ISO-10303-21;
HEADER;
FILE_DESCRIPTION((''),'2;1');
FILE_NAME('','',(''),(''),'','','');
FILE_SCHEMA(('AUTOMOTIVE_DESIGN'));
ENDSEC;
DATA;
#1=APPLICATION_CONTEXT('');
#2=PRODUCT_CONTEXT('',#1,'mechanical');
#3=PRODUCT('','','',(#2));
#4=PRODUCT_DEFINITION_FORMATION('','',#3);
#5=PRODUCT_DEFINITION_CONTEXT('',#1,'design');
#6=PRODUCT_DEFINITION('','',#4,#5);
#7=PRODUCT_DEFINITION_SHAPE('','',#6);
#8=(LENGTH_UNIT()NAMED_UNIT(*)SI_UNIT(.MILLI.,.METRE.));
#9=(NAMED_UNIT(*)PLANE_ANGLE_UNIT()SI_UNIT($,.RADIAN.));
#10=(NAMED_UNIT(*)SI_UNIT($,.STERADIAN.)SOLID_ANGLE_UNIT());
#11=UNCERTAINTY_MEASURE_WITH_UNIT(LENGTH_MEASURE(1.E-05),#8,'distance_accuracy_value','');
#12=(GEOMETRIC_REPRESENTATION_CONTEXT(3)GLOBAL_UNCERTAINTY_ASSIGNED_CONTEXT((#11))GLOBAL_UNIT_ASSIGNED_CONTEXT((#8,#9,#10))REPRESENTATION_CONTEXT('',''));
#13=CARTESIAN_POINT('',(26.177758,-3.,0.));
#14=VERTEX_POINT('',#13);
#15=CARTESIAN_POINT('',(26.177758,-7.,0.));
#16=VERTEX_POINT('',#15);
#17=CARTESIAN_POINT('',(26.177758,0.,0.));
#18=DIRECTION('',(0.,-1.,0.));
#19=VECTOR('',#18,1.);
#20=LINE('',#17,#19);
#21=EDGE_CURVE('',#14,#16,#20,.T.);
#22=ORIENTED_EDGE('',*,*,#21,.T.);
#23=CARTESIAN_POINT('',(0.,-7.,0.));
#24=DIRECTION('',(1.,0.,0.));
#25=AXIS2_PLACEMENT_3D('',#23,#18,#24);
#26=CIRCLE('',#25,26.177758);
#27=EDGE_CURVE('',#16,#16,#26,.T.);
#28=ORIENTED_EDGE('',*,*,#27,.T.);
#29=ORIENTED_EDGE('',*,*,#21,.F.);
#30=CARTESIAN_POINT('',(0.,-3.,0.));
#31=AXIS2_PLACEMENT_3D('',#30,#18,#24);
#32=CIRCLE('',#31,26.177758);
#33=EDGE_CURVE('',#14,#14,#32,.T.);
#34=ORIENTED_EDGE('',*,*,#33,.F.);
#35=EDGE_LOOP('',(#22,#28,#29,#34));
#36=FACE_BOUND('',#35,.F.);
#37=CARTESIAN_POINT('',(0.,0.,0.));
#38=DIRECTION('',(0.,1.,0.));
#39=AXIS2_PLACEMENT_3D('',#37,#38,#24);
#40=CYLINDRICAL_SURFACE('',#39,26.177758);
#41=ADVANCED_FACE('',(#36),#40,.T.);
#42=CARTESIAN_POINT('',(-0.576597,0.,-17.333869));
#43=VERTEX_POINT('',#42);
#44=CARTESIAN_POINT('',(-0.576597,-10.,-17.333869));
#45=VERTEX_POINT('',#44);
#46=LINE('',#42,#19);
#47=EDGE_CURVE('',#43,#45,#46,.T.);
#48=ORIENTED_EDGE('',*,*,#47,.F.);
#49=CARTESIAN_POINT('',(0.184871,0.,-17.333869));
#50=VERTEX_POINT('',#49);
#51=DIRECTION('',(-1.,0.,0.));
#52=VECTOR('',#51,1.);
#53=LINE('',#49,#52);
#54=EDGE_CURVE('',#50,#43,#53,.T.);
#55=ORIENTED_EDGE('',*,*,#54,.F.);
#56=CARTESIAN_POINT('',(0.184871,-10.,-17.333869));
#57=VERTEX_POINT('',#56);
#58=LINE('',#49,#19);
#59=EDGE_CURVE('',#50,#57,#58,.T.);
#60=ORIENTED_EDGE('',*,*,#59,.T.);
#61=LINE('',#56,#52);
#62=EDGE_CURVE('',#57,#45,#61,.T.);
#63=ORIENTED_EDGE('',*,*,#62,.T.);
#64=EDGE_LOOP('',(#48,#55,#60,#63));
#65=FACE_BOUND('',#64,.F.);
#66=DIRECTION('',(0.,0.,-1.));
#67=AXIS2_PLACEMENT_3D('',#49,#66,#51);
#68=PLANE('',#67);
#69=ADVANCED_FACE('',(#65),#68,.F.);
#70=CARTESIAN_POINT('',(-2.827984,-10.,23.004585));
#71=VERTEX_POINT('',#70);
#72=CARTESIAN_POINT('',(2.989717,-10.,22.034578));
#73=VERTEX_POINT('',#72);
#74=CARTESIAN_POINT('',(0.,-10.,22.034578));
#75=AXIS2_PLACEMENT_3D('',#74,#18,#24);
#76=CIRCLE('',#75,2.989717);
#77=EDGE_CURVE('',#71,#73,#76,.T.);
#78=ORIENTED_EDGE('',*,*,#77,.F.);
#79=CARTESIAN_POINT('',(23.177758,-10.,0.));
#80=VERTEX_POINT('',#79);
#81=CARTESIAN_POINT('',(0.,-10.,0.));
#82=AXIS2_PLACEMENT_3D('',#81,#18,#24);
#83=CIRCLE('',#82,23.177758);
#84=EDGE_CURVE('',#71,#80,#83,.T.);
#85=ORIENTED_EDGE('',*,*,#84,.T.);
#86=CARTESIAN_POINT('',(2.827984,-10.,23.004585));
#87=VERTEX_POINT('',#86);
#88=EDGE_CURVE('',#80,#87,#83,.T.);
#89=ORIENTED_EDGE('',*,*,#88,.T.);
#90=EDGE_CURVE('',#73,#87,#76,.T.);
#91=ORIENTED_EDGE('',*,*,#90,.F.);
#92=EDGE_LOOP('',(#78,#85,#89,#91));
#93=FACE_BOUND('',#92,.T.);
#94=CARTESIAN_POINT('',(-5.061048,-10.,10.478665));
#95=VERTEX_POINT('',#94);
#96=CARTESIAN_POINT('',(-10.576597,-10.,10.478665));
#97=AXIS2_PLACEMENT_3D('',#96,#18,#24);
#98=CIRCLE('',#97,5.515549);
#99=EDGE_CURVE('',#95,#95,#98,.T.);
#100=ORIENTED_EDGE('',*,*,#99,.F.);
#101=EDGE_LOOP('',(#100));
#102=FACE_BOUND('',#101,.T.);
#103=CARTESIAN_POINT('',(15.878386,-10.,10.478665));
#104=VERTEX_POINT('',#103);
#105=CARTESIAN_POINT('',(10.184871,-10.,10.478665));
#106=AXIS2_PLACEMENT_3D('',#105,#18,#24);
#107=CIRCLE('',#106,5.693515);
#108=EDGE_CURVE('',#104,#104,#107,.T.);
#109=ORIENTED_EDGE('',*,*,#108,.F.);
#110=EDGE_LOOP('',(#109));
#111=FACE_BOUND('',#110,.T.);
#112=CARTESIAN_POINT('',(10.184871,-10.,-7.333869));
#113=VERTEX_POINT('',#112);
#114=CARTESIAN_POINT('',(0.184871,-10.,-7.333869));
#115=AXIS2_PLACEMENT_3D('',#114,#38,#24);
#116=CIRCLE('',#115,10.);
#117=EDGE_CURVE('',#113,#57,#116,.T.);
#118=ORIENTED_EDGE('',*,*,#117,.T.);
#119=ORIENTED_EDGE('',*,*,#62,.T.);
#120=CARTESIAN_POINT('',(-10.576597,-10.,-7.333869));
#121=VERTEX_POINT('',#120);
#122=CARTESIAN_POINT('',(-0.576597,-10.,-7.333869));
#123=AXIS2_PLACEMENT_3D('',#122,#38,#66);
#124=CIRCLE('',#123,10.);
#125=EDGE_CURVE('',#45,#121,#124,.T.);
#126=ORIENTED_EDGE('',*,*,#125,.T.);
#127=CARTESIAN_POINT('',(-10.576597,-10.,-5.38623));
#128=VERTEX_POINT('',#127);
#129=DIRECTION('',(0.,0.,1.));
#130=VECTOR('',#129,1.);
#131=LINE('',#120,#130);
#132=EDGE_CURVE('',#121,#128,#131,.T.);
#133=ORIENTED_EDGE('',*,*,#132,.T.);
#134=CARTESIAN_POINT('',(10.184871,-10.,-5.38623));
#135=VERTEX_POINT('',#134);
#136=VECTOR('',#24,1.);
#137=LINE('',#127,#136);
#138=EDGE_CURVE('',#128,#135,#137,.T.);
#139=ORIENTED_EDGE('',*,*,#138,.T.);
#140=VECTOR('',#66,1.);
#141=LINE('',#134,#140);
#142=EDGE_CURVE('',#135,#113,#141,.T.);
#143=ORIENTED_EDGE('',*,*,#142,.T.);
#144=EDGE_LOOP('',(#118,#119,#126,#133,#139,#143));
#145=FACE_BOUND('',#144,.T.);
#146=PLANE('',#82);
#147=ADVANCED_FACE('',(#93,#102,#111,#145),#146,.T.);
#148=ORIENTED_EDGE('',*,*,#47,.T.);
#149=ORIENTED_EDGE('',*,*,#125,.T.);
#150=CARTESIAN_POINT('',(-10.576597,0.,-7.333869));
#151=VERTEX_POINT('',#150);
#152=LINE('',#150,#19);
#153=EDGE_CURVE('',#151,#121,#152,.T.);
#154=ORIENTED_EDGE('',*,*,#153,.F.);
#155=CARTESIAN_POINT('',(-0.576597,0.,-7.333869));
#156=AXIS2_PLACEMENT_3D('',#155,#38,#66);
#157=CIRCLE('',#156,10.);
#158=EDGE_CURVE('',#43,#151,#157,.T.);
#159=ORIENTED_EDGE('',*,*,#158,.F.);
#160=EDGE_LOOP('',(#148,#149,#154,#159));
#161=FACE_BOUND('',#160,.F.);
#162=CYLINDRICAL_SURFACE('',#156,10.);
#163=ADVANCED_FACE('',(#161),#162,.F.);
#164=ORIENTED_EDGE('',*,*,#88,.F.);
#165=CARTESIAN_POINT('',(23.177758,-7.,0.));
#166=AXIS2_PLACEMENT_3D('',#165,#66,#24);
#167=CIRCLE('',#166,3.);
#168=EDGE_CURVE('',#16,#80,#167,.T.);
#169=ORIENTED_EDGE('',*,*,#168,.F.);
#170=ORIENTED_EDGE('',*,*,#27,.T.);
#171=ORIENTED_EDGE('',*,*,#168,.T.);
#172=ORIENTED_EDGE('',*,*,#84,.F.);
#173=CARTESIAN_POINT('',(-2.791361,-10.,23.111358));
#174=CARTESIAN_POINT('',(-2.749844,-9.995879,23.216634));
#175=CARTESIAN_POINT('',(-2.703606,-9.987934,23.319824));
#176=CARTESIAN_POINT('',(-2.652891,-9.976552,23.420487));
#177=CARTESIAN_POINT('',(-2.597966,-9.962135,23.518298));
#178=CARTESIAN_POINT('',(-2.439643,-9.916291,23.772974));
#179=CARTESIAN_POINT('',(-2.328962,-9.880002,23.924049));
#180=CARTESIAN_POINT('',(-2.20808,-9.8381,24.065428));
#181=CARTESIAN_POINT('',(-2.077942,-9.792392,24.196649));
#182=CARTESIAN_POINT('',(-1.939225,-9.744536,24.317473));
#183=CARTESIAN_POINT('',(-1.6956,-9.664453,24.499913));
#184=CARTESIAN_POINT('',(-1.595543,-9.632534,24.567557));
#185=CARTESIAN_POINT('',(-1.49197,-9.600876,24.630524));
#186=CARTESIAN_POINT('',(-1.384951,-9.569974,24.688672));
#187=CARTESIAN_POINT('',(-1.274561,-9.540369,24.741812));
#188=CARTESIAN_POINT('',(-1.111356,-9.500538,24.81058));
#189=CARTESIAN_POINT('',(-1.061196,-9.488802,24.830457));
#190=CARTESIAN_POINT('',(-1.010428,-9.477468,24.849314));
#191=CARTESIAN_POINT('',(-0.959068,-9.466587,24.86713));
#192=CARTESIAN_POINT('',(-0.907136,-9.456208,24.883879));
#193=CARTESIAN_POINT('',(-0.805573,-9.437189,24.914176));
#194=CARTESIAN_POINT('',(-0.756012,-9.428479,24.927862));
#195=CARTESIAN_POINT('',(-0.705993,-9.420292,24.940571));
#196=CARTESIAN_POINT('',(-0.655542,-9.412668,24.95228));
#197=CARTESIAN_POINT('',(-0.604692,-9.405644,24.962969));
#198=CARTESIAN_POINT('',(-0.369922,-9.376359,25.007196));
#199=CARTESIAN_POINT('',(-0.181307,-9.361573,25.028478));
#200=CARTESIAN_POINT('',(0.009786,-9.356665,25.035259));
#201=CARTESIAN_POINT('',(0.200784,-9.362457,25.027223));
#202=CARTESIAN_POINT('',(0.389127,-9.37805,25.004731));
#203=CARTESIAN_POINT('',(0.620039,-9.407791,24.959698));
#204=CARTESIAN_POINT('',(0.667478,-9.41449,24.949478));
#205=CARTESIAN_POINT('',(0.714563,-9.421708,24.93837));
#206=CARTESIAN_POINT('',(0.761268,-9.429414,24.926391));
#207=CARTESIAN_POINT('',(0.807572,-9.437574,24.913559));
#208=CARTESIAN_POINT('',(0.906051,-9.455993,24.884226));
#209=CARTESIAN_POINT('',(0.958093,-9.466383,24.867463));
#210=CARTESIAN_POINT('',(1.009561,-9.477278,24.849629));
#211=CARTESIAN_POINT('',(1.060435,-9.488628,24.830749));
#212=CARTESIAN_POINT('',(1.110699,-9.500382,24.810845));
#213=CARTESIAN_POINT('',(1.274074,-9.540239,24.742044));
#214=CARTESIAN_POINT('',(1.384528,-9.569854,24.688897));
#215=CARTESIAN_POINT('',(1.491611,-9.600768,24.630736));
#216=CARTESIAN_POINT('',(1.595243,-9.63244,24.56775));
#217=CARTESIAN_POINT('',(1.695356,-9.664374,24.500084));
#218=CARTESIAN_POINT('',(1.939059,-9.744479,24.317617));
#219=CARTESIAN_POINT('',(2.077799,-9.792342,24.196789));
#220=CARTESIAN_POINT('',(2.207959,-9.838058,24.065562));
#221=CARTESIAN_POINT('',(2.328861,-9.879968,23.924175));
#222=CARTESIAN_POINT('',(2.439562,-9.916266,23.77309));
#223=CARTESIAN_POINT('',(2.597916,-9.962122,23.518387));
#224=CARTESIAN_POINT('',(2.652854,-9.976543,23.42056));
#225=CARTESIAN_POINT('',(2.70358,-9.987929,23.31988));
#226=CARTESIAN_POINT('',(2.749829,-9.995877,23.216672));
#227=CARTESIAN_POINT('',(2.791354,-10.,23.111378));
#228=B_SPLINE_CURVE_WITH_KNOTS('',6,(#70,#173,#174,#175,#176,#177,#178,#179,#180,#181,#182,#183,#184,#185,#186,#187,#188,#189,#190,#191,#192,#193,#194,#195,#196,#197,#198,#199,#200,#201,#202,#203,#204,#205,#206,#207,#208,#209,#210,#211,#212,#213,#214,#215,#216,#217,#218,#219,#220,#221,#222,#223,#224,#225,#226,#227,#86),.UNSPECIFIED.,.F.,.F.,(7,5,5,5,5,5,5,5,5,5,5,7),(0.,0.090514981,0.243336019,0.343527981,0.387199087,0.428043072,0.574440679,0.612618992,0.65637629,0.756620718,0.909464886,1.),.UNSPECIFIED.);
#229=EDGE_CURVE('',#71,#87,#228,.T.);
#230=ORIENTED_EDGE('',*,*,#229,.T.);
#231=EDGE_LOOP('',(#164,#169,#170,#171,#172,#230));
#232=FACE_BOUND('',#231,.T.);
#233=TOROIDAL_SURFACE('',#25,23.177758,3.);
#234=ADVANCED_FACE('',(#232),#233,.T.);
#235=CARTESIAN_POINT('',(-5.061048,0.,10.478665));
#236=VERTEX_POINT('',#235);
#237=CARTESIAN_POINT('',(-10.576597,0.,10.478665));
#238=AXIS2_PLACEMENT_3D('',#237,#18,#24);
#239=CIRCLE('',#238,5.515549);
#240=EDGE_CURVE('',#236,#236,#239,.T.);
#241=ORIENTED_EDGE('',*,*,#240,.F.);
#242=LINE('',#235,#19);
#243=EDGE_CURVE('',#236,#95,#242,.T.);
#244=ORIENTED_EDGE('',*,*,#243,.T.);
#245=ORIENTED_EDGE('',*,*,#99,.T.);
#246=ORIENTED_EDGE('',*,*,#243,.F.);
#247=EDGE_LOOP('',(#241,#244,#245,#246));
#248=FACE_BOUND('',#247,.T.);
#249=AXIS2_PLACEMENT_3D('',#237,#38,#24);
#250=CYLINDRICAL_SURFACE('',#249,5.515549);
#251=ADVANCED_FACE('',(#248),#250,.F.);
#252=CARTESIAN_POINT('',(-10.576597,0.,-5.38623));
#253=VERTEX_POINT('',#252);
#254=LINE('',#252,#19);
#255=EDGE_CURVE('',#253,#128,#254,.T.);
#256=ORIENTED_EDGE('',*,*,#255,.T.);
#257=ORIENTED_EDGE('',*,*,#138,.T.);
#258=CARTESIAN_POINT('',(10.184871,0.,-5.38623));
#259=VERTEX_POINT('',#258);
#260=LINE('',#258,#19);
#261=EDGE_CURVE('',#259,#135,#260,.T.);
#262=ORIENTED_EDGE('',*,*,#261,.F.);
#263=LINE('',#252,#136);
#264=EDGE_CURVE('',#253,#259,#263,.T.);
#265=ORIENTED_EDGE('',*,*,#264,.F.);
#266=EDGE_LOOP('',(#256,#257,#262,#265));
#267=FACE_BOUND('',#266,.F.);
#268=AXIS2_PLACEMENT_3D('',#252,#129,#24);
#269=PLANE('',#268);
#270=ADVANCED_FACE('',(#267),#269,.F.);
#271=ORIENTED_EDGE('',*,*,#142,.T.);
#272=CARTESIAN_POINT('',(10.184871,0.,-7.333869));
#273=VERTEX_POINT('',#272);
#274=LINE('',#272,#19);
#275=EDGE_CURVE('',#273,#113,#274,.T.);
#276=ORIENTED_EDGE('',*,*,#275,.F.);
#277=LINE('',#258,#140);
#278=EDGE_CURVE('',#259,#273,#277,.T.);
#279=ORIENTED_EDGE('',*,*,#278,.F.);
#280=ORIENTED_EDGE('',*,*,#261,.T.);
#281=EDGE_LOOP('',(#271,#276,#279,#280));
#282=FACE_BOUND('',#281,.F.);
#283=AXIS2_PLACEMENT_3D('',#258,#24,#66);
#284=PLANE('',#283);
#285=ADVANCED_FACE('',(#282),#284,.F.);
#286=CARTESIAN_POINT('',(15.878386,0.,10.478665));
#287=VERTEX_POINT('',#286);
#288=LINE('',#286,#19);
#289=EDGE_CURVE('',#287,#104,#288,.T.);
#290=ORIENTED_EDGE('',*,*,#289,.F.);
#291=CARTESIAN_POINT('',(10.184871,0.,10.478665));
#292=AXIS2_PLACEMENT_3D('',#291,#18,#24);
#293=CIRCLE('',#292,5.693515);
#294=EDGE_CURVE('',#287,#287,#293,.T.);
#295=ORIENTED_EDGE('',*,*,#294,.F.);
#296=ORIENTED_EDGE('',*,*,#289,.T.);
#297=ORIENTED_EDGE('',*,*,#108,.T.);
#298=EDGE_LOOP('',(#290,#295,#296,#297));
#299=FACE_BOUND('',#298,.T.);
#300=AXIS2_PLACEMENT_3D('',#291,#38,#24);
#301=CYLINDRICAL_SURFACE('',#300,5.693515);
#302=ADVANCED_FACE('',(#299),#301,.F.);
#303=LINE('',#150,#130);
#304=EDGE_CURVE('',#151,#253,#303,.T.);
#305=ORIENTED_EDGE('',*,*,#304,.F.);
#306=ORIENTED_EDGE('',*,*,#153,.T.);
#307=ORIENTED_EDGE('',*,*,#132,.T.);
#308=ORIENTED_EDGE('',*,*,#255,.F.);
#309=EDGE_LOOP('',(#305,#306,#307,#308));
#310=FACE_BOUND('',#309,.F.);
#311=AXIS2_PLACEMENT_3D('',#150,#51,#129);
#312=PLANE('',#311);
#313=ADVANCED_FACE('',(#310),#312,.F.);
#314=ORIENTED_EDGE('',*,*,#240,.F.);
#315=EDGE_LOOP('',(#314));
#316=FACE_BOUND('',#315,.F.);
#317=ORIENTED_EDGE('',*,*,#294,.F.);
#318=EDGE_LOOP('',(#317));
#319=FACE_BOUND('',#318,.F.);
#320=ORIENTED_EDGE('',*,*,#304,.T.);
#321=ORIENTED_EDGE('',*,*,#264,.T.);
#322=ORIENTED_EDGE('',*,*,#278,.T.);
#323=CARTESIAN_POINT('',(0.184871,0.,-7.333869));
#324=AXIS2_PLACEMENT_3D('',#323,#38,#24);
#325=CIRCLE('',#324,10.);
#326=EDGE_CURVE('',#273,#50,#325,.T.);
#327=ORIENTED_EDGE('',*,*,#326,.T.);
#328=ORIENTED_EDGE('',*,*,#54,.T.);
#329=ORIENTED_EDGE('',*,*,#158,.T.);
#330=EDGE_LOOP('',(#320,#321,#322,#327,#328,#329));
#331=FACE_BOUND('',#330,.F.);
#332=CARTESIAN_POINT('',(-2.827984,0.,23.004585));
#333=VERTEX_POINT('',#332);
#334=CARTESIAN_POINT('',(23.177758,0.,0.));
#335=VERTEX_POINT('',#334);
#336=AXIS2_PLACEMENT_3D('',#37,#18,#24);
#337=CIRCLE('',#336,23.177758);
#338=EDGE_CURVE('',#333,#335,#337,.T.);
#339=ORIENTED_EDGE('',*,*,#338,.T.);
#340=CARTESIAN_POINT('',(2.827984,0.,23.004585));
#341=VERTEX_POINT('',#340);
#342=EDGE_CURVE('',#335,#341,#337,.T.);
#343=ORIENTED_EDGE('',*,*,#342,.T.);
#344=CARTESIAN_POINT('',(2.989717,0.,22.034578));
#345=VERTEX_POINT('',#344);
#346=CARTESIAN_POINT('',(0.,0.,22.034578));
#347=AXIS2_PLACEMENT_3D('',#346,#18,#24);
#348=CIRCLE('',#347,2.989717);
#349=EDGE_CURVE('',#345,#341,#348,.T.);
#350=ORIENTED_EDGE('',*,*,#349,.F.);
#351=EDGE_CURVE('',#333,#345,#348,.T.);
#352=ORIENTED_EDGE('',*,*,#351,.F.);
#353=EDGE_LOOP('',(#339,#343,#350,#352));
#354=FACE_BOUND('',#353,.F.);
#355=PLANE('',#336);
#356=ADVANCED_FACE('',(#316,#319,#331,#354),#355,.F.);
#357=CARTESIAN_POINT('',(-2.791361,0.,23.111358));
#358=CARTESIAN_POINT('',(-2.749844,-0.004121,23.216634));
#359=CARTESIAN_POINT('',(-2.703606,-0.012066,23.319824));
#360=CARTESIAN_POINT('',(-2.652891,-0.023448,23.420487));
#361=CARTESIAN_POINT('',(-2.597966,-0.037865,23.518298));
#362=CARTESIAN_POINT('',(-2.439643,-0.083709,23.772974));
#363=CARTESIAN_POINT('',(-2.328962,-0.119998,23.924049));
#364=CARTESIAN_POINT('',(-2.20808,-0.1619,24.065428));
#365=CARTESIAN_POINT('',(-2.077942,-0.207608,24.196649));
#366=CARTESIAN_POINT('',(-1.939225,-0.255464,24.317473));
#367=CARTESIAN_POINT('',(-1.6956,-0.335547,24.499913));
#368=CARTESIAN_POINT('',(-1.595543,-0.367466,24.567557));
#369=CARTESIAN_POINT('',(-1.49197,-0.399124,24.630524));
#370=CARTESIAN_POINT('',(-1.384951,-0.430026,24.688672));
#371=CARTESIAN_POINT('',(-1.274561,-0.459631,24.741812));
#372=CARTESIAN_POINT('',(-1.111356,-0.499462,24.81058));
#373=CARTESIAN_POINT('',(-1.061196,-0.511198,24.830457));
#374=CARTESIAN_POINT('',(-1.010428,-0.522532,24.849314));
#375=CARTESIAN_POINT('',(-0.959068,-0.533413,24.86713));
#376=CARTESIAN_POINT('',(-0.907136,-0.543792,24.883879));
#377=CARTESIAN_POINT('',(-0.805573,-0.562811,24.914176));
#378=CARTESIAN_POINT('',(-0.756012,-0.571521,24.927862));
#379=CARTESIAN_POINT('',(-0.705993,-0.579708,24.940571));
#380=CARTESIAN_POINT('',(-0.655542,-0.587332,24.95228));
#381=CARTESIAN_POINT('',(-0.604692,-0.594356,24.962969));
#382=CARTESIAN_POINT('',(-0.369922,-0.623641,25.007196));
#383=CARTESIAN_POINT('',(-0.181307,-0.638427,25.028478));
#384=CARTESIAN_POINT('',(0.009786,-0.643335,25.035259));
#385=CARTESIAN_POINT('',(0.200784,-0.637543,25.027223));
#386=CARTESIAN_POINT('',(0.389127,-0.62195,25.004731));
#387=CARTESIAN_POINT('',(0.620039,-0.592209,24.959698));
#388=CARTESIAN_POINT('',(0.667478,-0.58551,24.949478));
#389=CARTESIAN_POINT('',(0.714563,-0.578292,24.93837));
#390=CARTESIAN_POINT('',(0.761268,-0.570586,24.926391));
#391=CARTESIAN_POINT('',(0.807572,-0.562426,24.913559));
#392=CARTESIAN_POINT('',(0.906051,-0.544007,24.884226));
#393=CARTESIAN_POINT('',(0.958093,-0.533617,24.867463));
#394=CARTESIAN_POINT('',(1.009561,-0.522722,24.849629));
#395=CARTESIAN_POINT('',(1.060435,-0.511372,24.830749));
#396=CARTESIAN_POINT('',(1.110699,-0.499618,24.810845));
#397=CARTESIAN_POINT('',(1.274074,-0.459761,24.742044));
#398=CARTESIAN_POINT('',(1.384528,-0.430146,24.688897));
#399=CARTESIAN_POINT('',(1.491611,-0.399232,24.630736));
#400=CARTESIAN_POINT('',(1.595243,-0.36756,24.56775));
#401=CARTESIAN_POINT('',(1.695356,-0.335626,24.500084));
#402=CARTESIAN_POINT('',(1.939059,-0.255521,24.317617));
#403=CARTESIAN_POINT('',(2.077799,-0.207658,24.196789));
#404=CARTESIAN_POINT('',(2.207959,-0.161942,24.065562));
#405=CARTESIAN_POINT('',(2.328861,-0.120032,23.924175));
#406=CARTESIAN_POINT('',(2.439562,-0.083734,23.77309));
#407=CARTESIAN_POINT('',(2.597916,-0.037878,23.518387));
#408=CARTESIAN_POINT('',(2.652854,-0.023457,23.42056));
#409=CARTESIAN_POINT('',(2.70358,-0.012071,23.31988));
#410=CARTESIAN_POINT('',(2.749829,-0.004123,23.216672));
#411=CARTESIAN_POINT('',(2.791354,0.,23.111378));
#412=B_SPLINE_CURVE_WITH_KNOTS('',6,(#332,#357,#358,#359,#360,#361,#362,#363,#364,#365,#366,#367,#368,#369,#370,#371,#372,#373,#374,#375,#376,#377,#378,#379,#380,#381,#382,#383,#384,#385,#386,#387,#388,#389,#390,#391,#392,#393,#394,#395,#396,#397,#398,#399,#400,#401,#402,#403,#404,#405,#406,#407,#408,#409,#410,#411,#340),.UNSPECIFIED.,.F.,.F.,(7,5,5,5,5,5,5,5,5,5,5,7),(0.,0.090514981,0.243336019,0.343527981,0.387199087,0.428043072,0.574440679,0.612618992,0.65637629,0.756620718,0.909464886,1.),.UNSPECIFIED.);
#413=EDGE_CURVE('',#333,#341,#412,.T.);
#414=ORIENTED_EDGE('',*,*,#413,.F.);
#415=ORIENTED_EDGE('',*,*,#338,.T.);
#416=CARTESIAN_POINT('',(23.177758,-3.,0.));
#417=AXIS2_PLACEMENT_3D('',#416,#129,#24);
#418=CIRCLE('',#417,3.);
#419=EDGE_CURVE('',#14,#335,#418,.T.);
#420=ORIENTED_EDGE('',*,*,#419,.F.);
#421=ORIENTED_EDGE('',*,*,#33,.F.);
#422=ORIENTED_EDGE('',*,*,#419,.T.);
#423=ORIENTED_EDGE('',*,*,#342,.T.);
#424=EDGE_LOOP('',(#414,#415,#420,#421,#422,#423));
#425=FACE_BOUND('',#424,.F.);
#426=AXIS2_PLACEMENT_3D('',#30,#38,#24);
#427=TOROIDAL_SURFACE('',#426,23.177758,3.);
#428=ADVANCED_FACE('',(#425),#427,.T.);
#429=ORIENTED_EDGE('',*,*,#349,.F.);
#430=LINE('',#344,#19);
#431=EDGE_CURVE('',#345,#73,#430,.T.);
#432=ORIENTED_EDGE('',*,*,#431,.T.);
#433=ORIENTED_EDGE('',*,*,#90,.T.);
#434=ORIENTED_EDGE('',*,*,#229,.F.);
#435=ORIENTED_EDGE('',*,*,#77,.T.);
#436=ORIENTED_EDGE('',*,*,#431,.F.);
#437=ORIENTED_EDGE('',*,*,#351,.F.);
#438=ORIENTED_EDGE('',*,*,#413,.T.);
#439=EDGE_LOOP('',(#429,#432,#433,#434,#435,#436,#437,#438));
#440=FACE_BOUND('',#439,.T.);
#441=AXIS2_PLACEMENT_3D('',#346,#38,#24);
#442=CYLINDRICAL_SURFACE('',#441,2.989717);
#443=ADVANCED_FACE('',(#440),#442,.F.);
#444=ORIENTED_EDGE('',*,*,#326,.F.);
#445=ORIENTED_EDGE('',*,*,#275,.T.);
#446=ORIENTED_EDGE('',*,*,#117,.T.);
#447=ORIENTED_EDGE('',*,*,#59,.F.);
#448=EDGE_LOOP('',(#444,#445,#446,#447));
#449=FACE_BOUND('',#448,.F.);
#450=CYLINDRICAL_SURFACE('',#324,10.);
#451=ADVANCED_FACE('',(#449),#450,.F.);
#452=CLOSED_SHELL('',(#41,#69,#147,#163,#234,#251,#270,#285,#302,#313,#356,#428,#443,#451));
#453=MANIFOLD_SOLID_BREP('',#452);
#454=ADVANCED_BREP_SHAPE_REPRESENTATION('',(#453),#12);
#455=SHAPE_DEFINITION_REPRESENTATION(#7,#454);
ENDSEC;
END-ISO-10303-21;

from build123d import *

# Parameters (mm, degrees)
F0_R     = 26.177757608
F0_R_2   = 5.5155489558
F0_R_3   = 2.9897173108
F0_R_4   = 5.6935154322
F1_DEPTH = 10


# Not quite as in the source:
# - a fillet or chamfer that OpenCascade refuses, or shapes differently, is made with other operations: its cross-section is extruded or revolved along the edge and cut away or added


with BuildPart() as f1:
    # F0 (on Front) → F1 (new body)
    with BuildSketch(Plane.XZ):
        Circle(F0_R)
        with BuildLine():
            Line((-10.5765974149, -7.333868891), (-10.5765974149, -5.3862300701))
            Line((-10.5765974149, -5.3862300701), (10.1848710328, -5.3862300701))
            Line((10.1848710328, -5.3862300701), (10.1848710328, -7.333868891))
            ThreePointArc((10.1848710328, -7.333868891), (7.2559388447, -14.4049367029), (0.1848710328, -17.333868891))
            Line((0.1848710328, -17.333868891), (-0.5765974149, -17.333868891))
            ThreePointArc((-0.5765974149, -17.333868891), (-7.6476652268, -14.4049367029), (-10.5765974149, -7.333868891))
        make_face(mode=Mode.SUBTRACT)
        with Locations((-10.5765974149, 10.4786651209)):
            Circle(F0_R_2, mode=Mode.SUBTRACT)
        with Locations((0, 22.0345780253)):
            Circle(F0_R_3, mode=Mode.SUBTRACT)
        with Locations((10.1848710328, 10.4786651209)):
            Circle(F0_R_4, mode=Mode.SUBTRACT)
    extrude(amount=F1_DEPTH)

    # F2: fillet of radius 3 on 2 edges, made by hand

    # F2_s1 → F2_t2 (revolve, cut)
    with BuildSketch(Plane.XY):
        with BuildLine():
            ThreePointArc((26.177757608, -7), (25.2990779516, -9.1213203436), (23.177757608, -10))
            Line((23.177757608, -10), (26.177757608, -10))
            Line((26.177757608, -10), (26.177757608, -7))
        make_face()
    revolve(axis=Axis((0, -10, 0), (0, -1, 0)), mode=Mode.SUBTRACT)

    # F2_s3 → F2_t4 (revolve, cut)
    with BuildSketch(Plane.XY):
        with BuildLine():
            ThreePointArc((26.177757608, -3), (25.2990779516, -0.8786796564), (23.177757608, 0))
            Line((23.177757608, 0), (26.177757608, 0))
            Line((26.177757608, 0), (26.177757608, -3))
        make_face()
    revolve(axis=Axis((0, 0, 0), (0, -1, 0)), mode=Mode.SUBTRACT)


solid = f1.part
